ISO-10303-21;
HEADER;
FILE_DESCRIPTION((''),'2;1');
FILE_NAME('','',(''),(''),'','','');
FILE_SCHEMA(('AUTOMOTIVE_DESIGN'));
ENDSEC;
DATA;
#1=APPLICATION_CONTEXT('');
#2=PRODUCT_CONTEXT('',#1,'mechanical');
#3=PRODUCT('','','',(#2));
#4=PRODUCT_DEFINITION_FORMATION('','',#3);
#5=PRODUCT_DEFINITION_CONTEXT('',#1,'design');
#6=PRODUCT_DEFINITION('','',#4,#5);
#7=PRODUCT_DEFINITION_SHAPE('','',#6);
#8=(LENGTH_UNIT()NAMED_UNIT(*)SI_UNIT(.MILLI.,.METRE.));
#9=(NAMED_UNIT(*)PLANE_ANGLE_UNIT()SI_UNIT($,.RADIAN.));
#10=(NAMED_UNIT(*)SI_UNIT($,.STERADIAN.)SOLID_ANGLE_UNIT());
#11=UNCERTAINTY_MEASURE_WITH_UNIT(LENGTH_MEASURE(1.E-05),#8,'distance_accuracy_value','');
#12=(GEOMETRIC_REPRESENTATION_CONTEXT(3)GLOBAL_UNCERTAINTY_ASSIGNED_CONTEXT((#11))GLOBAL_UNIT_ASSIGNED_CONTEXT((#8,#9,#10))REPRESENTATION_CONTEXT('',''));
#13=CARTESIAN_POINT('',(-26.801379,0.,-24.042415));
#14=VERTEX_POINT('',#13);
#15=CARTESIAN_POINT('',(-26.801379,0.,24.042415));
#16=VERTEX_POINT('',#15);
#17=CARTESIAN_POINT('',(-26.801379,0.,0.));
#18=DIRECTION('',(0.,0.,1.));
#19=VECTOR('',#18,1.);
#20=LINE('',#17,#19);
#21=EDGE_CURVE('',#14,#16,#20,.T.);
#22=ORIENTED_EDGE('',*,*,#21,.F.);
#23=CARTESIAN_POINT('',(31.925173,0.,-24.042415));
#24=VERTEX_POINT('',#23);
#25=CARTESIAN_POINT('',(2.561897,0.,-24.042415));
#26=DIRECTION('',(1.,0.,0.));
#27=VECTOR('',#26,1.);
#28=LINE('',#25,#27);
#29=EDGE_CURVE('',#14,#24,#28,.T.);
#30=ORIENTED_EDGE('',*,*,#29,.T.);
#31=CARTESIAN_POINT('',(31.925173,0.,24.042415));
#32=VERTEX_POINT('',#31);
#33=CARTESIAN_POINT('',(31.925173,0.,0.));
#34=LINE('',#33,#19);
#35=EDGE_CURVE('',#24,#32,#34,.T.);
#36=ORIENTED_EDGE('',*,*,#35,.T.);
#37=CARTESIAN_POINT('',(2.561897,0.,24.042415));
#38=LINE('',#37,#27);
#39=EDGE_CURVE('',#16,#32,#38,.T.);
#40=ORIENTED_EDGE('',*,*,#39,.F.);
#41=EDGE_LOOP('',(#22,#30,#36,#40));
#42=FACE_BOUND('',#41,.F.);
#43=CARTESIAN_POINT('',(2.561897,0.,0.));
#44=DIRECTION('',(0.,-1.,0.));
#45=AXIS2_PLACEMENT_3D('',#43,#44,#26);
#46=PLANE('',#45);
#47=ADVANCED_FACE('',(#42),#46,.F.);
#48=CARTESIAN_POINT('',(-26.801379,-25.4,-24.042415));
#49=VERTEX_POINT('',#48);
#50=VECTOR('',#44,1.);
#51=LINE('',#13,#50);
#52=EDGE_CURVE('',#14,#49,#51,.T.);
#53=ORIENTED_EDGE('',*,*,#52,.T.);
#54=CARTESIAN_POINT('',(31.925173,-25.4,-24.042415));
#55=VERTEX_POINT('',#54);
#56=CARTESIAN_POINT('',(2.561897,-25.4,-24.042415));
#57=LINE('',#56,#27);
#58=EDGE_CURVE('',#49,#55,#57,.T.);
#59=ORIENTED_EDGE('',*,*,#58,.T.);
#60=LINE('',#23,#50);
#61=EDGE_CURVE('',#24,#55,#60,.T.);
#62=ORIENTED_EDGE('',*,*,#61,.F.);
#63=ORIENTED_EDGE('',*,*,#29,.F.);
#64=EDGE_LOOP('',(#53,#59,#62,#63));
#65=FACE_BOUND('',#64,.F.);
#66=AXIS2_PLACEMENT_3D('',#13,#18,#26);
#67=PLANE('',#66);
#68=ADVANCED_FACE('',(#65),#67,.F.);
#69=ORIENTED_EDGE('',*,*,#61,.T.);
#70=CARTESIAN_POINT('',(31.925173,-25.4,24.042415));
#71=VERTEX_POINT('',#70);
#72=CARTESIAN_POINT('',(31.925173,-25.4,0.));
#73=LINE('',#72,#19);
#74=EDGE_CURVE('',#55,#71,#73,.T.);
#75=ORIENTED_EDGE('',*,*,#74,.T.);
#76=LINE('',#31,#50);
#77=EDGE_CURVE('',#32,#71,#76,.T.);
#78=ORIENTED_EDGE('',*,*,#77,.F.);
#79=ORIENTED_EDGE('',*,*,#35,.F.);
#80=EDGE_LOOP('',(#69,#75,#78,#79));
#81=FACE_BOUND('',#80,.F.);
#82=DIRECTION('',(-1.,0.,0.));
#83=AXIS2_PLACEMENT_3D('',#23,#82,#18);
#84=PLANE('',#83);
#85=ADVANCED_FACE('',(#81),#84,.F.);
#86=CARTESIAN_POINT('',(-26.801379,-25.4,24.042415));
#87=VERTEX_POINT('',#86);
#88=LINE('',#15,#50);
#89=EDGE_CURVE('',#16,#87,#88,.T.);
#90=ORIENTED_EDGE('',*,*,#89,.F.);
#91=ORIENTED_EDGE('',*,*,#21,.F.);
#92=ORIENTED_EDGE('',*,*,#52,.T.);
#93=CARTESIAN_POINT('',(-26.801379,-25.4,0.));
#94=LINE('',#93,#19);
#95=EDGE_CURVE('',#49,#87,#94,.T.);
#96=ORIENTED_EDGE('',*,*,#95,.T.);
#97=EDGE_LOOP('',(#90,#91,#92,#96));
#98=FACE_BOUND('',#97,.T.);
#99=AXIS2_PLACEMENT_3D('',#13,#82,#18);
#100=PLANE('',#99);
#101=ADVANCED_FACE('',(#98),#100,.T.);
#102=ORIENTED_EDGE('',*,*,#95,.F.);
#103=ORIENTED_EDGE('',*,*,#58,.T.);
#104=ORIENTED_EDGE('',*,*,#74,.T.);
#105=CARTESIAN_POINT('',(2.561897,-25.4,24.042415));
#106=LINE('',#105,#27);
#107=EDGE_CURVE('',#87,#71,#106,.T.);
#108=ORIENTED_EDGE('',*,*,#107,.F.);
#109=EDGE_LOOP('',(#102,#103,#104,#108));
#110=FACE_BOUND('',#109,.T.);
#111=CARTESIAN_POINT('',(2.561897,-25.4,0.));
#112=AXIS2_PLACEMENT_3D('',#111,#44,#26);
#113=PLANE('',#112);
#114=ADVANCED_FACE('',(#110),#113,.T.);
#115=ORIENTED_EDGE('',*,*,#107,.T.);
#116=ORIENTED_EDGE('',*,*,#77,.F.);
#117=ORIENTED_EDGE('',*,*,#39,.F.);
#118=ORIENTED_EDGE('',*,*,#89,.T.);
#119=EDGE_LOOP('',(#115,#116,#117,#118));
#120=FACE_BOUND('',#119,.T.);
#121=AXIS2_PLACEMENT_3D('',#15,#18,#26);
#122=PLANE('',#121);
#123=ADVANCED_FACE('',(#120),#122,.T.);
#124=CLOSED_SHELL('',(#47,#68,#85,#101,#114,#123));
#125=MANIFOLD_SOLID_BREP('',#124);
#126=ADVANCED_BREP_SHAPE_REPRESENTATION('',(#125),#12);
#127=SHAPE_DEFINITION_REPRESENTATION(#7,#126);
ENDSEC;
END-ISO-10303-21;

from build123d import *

# Parameters (mm, degrees)
F0_W     = 58.7265528738
F0_H     = 48.0848290026
F1_DEPTH = 25.4
F2_R     = 10.0505175069
F3_DEPTH = 25.4


# Not quite as in the source:
# - the program builds the solid bodies; features that only make, move or delete a surface that nothing else refers to are left out


with BuildPart() as f1:
    # F0 (on Front) → F1 (new body)
    with BuildSketch(Plane.XZ):
        with Locations((2.5618970394, 0)):
            Rectangle(F0_W, F0_H)
    extrude(amount=F1_DEPTH)

    # F2 (on Front) → F3 (join)
    with BuildSketch(Plane.XZ):
        Circle(F2_R)
    extrude(amount=F3_DEPTH)


solid = f1.part
